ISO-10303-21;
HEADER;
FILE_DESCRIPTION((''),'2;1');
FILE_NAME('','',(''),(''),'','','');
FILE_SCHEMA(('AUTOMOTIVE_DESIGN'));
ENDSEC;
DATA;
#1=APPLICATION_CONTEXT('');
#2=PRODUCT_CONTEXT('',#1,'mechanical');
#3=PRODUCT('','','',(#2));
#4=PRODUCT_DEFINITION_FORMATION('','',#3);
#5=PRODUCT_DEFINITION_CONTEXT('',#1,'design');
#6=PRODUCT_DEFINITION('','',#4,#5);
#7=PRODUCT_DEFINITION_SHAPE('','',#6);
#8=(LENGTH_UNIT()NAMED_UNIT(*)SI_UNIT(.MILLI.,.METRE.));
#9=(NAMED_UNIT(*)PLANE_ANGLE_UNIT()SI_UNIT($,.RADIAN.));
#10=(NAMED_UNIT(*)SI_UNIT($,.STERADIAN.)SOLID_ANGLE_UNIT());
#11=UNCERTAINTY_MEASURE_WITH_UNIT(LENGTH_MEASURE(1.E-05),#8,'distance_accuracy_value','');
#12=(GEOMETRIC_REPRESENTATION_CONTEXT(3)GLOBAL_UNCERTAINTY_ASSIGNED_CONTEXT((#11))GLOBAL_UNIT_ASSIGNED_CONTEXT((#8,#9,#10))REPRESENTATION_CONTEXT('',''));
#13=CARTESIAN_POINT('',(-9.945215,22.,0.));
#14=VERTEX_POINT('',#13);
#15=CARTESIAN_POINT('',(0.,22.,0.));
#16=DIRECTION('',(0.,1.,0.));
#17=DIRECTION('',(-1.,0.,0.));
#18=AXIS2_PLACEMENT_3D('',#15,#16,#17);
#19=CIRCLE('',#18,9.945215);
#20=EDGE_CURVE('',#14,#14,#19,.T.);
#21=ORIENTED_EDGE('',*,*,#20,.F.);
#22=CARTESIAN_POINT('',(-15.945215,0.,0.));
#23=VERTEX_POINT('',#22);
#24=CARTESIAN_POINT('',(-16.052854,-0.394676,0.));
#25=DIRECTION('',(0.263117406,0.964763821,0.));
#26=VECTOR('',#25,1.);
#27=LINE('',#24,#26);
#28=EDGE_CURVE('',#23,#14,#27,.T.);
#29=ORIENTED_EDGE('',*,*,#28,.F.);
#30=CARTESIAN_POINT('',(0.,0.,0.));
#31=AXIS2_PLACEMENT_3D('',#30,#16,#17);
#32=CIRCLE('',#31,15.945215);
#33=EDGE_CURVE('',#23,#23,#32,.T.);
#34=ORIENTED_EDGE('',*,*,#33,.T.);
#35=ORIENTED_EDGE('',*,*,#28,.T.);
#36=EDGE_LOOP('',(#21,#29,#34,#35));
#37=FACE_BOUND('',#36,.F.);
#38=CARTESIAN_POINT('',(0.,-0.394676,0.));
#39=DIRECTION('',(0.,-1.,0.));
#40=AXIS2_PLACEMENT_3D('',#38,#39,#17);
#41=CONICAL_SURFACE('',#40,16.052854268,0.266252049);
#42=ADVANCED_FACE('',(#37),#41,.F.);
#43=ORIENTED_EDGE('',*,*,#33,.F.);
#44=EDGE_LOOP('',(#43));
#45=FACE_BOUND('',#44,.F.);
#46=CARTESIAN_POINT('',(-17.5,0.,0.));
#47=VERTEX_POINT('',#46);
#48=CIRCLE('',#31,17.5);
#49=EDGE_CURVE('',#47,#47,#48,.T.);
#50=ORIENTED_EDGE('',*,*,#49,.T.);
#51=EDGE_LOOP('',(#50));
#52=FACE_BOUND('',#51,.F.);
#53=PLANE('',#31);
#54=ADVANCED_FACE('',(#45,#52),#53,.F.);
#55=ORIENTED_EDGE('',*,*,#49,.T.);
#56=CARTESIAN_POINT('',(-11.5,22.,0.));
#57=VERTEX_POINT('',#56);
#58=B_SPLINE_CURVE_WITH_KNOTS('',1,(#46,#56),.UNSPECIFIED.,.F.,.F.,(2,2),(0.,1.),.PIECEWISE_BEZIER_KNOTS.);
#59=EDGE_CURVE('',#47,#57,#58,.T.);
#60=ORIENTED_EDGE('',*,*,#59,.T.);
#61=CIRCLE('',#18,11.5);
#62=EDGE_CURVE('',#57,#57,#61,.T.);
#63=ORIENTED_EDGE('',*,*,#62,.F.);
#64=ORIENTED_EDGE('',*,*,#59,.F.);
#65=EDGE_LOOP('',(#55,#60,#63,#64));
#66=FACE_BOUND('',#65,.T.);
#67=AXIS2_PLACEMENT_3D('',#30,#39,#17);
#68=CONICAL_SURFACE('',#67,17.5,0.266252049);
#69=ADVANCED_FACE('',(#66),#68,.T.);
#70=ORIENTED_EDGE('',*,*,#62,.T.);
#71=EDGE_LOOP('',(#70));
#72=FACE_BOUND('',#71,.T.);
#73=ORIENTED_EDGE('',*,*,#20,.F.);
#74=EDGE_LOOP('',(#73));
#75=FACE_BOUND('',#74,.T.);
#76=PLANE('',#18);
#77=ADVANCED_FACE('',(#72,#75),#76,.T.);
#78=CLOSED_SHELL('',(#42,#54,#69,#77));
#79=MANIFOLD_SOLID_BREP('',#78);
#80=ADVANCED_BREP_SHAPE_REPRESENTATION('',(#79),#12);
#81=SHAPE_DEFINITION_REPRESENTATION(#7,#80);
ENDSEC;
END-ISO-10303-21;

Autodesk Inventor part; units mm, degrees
ref_plane "YZ Plane" through (0, 0, 0) normal (1, 0, 0) x (0, 1, 0)
ref_plane "XY Plane" through (0, 0, 0) normal (0, 0, 1) x (1, 0, 0)
sketch "Szkic6" plane through (0, 0, 0) normal (0, 1, 0) x (-1, 0, 0)
  circle A0 centre (0, 0) radius 17.5
  dimension "d33" = 35
ref_plane "Płaszczyzna konstrukcyjna1" through (0, 22, 0) normal (0, 1, 0) x (-1, 0, 0)
sketch "Szkic7" plane through (0, 22, 0) normal (0, 1, 0) x (-1, 0, 0)
  circle A0 centre (0, 0) radius 11.5
  dimension "d35" = 23
loft "Wyciągnięcie złożone1" add profiles "Szkic6", "Szkic7"
shell "Skorupa1" thickness 1.5 removed faces 2 at (-0.1507, 22, 2.542) at (-4.3663, 0, -1.0762)
equation "\"d33\" = OD1"
equation "\"d35\" = OD2"
equation "\"d52\" = THK"
equation "\"SzerokośćGięciaPodcięcia\" = Grubość"
equation "\"RozmiarPodcięciaNarożnika\" = 4 * Grubość"
equation "\"PromieńPrzejścia\" = PromieńGięcia"
equation "\"Rozmiar_promienia_Jacobiego\" = PromieńGięcia"
equation "\"Wielk_odstępu\" = Grubość"
equation "\"d2\" = PromieńGięcia"
equation "\"d23\" = PromieńGięcia"
equation "\"OD1\" = 35"
equation "\"OD2\" = 23"
equation "\"L\" = 22"
equation "\"THK\" = 1.5"
equation "\"d34\" = L"
equation "\"Grubość\" = 1.5"
equation "\"PromieńGięcia\" = 3"
properties part number "Redukcja symetryczna Ø35x23x1,5 L=22" material "304"
